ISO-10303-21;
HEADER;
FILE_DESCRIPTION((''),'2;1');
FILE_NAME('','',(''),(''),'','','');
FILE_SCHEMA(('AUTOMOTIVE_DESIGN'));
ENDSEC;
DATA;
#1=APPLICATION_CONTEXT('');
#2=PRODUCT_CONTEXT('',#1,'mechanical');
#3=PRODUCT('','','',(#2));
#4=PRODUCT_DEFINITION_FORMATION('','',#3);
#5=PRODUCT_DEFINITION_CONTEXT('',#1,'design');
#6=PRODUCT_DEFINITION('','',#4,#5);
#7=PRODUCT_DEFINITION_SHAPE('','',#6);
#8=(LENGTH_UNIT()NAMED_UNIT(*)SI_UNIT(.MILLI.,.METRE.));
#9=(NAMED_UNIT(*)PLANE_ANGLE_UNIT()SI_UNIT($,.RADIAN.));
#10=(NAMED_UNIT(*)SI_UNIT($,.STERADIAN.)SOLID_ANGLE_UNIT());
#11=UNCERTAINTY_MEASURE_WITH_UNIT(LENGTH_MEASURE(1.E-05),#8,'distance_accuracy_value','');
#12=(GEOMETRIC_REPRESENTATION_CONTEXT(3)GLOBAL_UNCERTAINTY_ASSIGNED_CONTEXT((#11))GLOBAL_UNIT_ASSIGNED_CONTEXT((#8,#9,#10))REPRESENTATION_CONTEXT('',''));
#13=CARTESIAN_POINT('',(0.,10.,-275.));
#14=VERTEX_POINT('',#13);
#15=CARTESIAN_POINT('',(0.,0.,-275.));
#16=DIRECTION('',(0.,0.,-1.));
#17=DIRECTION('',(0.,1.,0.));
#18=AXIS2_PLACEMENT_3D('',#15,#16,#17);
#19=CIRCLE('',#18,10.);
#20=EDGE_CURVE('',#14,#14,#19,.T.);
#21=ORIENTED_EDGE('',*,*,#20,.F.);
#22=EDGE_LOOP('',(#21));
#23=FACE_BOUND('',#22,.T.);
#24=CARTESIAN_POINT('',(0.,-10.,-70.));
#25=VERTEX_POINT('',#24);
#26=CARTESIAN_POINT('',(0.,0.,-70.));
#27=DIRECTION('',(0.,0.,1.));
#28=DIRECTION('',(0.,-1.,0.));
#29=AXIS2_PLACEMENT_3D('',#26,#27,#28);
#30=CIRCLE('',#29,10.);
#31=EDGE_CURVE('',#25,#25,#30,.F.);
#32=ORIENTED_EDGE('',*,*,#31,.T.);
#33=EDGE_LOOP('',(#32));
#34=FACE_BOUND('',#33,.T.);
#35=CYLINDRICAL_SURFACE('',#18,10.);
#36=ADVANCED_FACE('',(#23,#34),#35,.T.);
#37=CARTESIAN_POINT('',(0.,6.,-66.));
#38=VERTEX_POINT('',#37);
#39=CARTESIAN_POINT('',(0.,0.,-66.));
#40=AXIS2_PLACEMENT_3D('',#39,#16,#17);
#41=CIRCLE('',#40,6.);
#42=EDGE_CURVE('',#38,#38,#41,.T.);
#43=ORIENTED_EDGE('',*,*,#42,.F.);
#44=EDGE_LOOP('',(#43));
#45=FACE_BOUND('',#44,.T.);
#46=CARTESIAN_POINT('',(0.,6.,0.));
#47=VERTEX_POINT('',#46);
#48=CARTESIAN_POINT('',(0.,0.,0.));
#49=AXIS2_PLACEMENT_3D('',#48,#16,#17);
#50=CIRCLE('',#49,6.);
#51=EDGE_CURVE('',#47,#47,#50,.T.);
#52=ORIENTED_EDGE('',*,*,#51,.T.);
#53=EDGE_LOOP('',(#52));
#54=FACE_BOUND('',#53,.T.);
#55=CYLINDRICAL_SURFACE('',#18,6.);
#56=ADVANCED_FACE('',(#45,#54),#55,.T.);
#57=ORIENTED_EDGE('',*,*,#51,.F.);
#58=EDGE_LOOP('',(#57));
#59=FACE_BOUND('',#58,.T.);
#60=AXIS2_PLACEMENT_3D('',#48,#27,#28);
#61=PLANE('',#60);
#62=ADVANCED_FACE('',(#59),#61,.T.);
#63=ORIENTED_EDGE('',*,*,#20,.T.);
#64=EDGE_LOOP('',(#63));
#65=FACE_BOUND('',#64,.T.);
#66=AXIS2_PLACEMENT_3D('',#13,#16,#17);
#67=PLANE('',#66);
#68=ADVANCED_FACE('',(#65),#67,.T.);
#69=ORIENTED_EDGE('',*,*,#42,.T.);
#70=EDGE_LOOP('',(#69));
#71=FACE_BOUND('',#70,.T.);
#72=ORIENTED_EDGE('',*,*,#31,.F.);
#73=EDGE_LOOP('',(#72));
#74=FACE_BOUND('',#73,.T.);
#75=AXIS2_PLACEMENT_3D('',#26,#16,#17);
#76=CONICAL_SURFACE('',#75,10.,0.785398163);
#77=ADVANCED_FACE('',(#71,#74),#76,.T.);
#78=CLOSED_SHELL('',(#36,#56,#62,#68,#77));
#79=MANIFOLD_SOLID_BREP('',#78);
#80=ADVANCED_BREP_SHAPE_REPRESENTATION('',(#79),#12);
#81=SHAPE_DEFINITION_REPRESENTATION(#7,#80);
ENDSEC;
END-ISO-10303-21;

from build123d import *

# Parameters (mm, degrees)
CHAMFER1_SIZE = 4


with BuildPart() as part:
    # Sketch1 → Revolve1 (revolve)
    with BuildSketch(Plane(origin=(0, 0, 0), x_dir=(0, 0, -1), z_dir=(1, 0, 0))):
        Polygon((0, 0), (0, 6), (66, 6), (66, 10), (275, 10), (275, 0), align=None)
    revolve(axis=Axis((0, 0, -275), (0, 0, 1)))

    # Chamfer1
    chamfer1_edges = [part.edges().sort_by_distance(p)[0] for p in [
        (0, -10, -66),
    ]]
    chamfer(chamfer1_edges, length=CHAMFER1_SIZE - 0.0001)  # a hair under: the kernel refuses the full size


solid = part.part
